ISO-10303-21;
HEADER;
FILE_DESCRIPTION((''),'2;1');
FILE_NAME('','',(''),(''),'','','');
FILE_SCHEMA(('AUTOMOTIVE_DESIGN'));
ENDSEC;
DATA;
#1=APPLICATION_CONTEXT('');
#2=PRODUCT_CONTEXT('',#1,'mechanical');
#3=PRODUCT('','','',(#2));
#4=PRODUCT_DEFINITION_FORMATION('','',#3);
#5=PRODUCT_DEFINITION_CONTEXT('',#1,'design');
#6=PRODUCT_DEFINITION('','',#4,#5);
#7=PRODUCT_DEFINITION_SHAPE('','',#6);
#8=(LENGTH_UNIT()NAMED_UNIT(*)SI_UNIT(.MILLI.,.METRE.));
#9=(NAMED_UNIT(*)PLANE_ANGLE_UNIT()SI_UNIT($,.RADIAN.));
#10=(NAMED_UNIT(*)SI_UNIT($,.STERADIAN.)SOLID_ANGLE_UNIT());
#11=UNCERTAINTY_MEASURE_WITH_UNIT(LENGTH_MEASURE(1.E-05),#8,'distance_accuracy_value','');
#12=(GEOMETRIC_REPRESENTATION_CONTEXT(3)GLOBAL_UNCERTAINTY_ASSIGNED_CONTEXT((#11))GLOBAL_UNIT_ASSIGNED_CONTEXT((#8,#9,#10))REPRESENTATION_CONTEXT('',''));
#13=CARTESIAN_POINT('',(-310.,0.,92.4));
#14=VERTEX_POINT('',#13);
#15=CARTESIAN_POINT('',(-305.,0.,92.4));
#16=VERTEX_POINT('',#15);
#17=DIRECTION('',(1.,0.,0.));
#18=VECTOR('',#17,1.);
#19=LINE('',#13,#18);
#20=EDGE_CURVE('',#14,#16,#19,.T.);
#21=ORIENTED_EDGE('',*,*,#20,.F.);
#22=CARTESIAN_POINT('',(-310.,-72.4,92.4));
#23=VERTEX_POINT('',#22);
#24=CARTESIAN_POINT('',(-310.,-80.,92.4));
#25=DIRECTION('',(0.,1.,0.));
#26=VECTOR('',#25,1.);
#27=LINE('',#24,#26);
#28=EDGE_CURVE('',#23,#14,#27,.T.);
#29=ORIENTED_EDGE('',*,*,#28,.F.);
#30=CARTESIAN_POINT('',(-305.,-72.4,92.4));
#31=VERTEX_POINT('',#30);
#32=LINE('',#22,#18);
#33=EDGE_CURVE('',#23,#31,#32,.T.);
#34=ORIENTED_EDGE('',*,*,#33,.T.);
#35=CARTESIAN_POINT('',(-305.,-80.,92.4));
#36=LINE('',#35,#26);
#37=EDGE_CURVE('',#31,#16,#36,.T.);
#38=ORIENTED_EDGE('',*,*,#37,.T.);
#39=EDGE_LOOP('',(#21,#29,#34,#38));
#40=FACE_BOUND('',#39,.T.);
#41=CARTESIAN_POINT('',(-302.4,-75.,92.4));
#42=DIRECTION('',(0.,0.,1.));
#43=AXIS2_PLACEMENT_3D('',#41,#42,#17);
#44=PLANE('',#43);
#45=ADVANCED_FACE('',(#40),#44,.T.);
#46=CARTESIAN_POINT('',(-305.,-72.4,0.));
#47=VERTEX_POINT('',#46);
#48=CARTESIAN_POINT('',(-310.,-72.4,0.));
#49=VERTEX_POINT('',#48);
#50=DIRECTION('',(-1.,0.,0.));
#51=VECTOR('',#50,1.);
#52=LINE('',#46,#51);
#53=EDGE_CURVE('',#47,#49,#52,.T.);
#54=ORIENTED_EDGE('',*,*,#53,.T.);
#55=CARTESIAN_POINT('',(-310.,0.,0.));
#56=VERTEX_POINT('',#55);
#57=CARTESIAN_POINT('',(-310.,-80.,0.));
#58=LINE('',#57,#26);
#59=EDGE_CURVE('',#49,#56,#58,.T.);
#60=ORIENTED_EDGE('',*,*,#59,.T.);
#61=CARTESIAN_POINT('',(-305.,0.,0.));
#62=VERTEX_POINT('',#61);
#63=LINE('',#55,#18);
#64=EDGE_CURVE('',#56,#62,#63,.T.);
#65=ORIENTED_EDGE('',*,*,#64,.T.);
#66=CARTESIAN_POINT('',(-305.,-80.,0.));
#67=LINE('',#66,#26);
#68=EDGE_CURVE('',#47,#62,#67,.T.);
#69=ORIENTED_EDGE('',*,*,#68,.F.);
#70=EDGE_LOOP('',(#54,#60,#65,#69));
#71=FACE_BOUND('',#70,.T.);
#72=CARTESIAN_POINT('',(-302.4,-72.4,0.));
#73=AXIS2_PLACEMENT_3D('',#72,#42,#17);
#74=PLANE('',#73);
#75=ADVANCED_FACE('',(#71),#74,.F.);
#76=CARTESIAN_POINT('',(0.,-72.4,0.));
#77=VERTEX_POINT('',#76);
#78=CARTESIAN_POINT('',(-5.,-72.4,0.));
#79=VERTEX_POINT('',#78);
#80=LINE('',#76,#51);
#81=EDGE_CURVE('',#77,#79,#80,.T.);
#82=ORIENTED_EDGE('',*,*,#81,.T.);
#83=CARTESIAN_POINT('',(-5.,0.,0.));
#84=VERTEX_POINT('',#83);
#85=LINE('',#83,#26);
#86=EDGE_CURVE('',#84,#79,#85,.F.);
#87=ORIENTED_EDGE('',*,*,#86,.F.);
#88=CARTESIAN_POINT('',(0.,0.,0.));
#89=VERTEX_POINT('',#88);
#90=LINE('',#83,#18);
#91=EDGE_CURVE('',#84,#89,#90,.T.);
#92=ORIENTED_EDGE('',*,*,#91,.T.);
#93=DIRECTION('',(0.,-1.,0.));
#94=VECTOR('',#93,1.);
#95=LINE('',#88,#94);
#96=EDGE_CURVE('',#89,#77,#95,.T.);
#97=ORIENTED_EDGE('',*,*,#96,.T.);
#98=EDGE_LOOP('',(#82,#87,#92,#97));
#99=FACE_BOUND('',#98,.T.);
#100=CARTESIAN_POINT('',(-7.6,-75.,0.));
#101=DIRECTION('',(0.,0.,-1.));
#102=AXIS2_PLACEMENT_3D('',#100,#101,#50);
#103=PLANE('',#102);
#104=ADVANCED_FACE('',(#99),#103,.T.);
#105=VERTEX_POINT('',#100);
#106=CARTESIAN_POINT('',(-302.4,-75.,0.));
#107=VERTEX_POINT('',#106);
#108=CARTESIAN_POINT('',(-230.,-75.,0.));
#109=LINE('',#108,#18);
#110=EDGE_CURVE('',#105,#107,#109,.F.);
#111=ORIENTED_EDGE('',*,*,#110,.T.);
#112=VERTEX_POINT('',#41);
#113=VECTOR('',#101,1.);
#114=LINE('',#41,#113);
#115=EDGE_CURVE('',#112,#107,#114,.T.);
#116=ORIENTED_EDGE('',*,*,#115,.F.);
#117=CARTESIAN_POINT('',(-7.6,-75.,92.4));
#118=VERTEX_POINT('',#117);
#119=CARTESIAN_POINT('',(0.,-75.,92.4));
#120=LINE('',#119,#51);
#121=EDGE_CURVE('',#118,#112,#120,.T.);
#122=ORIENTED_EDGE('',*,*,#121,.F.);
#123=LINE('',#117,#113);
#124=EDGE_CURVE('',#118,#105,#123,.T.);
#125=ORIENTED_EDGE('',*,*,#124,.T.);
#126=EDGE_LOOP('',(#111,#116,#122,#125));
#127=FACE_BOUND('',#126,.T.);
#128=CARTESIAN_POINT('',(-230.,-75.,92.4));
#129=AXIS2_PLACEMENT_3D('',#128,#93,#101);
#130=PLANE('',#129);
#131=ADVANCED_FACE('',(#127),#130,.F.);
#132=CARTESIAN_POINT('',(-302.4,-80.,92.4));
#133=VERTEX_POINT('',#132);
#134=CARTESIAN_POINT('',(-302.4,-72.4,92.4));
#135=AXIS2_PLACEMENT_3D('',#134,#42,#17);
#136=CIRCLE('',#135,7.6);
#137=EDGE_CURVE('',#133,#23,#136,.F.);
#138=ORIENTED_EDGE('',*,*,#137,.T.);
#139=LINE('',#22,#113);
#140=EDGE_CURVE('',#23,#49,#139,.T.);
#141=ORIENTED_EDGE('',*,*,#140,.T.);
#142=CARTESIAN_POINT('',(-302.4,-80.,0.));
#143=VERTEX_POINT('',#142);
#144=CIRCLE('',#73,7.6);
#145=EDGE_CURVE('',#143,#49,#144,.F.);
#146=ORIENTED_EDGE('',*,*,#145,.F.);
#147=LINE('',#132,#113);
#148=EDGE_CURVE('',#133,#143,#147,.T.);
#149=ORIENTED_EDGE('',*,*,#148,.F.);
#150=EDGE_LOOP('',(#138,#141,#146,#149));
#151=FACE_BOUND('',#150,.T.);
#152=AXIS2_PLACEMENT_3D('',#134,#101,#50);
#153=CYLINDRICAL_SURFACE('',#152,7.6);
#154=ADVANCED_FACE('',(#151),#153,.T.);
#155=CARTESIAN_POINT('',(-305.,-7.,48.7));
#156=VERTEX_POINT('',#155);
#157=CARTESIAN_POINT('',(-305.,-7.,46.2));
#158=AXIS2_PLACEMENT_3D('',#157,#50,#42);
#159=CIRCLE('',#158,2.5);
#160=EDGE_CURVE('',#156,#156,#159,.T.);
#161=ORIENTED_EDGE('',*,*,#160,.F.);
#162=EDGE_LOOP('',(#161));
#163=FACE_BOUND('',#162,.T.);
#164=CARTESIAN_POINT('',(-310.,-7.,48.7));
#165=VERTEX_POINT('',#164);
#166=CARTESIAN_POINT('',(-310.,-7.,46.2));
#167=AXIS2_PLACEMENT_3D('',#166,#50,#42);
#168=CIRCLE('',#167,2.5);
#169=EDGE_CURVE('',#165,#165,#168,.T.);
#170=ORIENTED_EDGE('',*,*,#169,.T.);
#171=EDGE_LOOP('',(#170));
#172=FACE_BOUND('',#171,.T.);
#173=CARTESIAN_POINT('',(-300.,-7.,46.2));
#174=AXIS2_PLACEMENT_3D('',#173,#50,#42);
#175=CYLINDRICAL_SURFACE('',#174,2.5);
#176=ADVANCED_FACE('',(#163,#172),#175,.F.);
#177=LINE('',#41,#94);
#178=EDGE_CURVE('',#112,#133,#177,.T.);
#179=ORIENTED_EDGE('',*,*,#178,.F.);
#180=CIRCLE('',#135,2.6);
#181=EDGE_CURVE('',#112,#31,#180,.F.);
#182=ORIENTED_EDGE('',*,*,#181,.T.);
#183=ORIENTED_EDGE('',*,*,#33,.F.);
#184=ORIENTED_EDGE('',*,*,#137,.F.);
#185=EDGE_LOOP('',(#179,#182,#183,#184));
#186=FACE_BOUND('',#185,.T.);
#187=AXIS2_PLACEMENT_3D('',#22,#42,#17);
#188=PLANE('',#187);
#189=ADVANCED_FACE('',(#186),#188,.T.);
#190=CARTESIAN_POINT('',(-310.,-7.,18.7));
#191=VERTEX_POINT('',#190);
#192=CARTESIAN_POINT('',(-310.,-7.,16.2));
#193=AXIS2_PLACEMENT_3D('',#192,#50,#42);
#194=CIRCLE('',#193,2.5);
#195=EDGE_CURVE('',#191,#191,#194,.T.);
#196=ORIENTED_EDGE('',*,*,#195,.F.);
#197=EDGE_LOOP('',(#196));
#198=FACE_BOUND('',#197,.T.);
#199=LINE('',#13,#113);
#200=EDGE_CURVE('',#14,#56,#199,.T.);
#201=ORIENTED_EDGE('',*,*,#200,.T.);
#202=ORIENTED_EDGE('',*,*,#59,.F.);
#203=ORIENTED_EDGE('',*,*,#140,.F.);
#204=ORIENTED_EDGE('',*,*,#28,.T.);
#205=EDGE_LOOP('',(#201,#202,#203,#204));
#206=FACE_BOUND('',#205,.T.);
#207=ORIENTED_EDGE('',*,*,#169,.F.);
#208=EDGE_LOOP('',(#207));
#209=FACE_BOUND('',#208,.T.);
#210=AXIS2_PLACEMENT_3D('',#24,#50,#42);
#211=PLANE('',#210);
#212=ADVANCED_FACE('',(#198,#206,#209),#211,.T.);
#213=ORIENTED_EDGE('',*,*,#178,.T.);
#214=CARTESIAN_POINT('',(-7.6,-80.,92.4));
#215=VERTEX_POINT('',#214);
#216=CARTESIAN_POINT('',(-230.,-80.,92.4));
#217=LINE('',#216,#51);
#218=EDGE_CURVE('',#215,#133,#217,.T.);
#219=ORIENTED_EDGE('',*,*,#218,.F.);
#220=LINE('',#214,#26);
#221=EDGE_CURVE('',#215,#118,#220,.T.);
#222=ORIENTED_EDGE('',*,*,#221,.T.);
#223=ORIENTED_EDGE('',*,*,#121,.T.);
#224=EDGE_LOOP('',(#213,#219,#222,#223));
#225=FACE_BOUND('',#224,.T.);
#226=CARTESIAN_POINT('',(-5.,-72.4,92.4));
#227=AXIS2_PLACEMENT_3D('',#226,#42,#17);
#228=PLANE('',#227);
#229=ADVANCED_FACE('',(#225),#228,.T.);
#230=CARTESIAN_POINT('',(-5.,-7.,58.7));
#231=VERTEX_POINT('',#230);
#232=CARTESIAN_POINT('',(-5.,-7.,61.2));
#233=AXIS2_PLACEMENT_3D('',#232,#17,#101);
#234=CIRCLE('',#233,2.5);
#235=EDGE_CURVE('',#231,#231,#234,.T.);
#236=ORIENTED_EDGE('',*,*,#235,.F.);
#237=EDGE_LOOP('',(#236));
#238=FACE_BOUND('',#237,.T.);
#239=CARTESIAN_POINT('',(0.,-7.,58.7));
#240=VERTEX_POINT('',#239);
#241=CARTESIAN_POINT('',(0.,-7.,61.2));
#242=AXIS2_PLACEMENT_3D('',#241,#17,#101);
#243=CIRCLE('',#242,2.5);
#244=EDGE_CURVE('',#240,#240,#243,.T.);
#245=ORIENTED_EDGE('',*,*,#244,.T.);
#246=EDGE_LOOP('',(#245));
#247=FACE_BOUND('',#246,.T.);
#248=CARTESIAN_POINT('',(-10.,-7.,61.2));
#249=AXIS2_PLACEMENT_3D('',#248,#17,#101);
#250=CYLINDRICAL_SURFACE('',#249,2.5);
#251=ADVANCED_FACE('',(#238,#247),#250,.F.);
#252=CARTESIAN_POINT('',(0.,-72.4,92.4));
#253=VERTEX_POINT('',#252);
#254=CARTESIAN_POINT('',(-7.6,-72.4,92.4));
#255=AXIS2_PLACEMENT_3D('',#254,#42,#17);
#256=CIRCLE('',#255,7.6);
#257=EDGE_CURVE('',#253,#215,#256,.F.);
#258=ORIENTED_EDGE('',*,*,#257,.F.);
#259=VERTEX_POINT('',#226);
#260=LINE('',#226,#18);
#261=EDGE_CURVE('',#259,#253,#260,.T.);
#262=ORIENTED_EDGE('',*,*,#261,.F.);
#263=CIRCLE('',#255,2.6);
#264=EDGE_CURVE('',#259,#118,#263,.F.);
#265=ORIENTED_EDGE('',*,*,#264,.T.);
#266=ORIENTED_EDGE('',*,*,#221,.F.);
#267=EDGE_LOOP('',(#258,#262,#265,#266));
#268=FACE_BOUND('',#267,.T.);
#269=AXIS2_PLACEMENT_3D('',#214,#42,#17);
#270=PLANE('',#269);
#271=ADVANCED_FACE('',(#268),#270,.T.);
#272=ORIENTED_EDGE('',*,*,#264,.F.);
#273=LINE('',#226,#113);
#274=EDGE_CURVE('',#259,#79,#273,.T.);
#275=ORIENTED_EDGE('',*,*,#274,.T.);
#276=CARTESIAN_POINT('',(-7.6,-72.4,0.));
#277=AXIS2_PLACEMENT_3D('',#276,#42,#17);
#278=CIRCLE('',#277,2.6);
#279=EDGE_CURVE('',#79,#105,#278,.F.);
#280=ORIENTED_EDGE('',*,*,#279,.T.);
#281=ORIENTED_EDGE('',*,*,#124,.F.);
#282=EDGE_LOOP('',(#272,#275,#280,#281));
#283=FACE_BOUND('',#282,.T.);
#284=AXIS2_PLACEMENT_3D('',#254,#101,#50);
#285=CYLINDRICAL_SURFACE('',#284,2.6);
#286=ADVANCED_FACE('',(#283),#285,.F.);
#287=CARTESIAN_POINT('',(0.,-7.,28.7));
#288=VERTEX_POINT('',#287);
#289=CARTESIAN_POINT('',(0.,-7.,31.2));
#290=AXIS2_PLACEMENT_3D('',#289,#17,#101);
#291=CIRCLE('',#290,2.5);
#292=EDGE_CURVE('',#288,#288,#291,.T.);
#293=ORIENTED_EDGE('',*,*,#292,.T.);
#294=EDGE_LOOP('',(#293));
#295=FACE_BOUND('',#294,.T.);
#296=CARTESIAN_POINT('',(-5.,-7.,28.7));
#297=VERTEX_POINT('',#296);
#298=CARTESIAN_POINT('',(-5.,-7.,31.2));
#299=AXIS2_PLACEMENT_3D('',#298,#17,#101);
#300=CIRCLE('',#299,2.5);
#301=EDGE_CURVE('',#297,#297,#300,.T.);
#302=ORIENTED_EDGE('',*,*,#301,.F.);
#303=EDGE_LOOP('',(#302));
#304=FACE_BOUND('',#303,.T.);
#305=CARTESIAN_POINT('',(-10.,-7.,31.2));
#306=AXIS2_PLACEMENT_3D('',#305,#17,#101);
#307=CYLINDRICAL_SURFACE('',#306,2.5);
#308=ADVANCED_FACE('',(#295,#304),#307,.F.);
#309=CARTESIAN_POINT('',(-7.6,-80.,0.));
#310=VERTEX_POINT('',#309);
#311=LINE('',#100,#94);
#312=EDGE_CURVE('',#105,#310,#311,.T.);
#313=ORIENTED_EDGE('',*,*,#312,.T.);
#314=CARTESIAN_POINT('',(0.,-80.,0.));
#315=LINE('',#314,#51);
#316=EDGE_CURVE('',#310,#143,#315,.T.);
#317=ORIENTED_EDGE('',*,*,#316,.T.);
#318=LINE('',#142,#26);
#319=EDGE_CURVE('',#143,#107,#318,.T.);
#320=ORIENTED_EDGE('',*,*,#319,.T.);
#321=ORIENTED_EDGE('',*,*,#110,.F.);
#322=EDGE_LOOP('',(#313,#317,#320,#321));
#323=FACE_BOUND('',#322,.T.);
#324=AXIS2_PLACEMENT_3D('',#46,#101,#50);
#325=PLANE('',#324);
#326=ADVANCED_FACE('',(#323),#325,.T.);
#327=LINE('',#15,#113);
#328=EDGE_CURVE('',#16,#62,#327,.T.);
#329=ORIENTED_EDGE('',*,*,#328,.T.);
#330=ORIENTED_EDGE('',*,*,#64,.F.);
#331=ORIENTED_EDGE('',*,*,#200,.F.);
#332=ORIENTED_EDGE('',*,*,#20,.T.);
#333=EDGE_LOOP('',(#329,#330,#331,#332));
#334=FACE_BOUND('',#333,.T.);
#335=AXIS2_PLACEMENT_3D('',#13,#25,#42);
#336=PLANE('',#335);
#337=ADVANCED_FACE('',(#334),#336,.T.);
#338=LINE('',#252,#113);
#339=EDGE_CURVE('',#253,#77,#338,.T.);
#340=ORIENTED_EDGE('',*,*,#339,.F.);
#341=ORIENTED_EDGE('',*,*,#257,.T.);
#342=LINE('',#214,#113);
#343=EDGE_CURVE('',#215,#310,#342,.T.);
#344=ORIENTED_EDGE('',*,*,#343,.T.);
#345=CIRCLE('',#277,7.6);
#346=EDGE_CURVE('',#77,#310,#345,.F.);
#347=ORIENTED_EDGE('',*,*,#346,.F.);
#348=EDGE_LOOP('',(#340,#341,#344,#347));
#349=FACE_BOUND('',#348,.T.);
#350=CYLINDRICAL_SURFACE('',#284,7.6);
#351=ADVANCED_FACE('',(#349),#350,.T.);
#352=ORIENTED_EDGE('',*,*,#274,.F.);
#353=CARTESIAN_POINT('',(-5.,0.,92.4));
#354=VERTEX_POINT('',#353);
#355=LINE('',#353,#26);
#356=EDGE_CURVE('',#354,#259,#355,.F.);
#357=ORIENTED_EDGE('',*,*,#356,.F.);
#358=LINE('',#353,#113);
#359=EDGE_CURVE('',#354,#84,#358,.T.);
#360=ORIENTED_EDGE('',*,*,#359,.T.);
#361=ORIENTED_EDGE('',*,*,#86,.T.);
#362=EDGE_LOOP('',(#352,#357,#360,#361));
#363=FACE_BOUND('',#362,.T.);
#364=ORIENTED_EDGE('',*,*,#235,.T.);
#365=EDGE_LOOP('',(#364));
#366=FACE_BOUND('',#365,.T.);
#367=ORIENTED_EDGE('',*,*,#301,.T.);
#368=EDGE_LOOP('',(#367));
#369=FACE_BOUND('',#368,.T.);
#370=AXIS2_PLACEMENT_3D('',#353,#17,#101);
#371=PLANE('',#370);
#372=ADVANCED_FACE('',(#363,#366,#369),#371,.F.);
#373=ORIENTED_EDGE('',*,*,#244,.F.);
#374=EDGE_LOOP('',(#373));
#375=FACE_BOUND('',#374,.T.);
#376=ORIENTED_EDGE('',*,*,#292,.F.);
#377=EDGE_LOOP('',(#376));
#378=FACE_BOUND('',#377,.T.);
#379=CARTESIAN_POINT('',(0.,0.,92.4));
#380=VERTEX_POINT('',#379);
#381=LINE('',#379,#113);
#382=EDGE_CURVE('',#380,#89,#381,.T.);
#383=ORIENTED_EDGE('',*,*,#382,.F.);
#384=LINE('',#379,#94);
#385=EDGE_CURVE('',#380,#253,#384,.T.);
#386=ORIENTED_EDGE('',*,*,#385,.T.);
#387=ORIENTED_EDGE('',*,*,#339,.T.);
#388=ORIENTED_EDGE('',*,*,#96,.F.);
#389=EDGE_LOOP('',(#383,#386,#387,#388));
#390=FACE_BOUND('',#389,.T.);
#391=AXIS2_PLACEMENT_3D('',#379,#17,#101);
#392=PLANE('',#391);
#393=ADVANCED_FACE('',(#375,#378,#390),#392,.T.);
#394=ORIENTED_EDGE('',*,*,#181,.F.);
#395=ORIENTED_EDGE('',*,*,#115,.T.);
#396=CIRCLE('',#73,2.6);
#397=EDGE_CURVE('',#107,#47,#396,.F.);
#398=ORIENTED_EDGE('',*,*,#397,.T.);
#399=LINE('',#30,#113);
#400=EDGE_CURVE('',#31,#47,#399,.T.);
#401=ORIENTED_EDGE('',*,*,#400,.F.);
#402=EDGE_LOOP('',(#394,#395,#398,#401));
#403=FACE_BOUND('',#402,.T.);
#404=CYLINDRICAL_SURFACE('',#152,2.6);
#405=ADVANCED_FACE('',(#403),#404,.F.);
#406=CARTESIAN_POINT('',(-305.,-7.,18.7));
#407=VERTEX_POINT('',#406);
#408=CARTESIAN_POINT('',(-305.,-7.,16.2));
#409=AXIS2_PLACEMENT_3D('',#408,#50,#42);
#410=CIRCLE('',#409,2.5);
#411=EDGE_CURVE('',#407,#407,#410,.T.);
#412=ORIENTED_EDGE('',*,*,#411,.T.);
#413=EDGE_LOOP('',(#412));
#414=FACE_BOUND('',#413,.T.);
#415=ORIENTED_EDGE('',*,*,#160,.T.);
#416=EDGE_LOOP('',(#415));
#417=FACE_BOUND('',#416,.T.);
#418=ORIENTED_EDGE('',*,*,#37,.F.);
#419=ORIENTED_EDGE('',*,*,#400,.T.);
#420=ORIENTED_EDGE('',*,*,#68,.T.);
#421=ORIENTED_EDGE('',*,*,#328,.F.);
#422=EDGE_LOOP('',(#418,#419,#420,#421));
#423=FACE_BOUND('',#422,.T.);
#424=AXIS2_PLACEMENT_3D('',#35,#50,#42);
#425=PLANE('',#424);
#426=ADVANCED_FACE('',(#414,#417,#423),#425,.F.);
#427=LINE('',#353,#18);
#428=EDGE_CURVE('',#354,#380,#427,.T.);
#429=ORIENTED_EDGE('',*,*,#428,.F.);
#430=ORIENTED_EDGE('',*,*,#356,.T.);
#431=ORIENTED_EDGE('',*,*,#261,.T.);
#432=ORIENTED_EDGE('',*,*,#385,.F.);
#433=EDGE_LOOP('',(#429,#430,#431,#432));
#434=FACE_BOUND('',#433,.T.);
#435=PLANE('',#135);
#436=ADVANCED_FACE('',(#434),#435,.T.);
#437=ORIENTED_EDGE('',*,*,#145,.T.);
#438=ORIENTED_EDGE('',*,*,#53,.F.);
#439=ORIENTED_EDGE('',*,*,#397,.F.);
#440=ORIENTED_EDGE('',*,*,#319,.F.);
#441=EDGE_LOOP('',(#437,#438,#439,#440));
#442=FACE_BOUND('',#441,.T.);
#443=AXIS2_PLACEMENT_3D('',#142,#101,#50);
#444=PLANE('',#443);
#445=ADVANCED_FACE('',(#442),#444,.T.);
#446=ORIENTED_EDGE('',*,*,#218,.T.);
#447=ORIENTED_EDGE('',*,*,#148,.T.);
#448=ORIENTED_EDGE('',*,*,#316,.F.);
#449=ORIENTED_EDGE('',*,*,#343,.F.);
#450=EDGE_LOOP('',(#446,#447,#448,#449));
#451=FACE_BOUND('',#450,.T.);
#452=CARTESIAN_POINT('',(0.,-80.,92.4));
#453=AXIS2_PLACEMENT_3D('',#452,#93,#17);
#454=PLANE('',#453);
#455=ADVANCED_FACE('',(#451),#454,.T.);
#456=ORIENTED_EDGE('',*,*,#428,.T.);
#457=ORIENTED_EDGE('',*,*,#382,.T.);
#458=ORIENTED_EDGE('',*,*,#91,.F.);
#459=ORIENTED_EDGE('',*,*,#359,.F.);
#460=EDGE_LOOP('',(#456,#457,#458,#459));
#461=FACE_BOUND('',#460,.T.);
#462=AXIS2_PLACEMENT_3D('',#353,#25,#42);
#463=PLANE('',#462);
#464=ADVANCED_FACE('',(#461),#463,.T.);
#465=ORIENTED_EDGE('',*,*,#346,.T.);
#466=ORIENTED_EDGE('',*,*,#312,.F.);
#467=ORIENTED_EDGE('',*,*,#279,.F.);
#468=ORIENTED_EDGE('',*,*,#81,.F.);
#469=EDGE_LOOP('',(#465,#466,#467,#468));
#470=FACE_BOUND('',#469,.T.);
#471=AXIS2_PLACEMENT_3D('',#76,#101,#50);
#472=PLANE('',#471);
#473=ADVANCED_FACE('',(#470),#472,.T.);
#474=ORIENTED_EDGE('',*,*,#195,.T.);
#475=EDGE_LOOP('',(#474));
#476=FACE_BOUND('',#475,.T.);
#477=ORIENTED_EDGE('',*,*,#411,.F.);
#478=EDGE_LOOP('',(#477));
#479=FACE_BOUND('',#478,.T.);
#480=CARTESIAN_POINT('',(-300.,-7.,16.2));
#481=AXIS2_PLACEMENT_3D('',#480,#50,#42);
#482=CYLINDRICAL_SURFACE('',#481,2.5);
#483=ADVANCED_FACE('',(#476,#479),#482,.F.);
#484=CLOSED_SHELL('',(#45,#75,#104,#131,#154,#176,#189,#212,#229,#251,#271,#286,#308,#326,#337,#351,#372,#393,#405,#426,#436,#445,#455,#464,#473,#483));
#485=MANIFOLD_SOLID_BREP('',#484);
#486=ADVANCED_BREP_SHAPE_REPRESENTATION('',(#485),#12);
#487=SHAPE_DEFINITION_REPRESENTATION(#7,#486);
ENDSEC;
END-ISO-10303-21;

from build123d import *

# Parameters (mm, degrees)
BASE_FLANGE1_DEPTH = 92.4
SKETCH6_R          = 2.5
CUT_EXTRUDE1_DEPTH = 10
SKETCH7_R          = 2.5
CUT_EXTRUDE2_DEPTH = 10


# Sheet-metal steps are written as plain solids
with BuildPart() as part:
    # Sketch1 → Base-Flange1 (new body)
    with BuildSketch(Plane.XY):
        with BuildLine():
            Line((0, 0), (0, -72.4))
            ThreePointArc((0, -72.4), (-2.225988463, -77.774011537), (-7.6, -80))
            Line((-7.6, -80), (-130, -80))
            Line((-130, -80), (-230, -80))
            Line((-230, -80), (-302.4, -80))
            ThreePointArc((-302.4, -80), (-307.774011537, -77.774011537), (-310, -72.4))
            Line((-310, -72.4), (-310, 0))
            Line((-310, 0), (-305, 0))
            Line((-305, 0), (-305, -72.4))
            ThreePointArc((-305, -72.4), (-304.238477631, -74.238477631), (-302.4, -75))
            Line((-302.4, -75), (-230, -75))
            Line((-230, -75), (-130, -75))
            Line((-130, -75), (-7.6, -75))
            ThreePointArc((-7.6, -75), (-5.761522369, -74.238477631), (-5, -72.4))
            Line((-5, -72.4), (-5, 0))
            Line((-5, 0), (0, 0))
        make_face()
    extrude(amount=BASE_FLANGE1_DEPTH)

    # Sketch6 → Cut-Extrude1 (cut)
    with BuildSketch(Plane(origin=(0, 0, 0), x_dir=(0, 0, -1), z_dir=(1, 0, 0))):
        with Locations((-61.2, -7)):
            Circle(SKETCH6_R)
        with Locations((-31.2, -7)):
            Circle(SKETCH6_R)
    extrude(amount=-CUT_EXTRUDE1_DEPTH, mode=Mode.SUBTRACT)

    # Sketch7 → Cut-Extrude2 (cut)
    with BuildSketch(Plane.ZY.offset(310)):
        with Locations((46.2, -7)):
            Circle(SKETCH7_R)
        with Locations((16.2, -7)):
            Circle(SKETCH7_R)
    extrude(amount=-CUT_EXTRUDE2_DEPTH, mode=Mode.SUBTRACT)


solid = part.part
